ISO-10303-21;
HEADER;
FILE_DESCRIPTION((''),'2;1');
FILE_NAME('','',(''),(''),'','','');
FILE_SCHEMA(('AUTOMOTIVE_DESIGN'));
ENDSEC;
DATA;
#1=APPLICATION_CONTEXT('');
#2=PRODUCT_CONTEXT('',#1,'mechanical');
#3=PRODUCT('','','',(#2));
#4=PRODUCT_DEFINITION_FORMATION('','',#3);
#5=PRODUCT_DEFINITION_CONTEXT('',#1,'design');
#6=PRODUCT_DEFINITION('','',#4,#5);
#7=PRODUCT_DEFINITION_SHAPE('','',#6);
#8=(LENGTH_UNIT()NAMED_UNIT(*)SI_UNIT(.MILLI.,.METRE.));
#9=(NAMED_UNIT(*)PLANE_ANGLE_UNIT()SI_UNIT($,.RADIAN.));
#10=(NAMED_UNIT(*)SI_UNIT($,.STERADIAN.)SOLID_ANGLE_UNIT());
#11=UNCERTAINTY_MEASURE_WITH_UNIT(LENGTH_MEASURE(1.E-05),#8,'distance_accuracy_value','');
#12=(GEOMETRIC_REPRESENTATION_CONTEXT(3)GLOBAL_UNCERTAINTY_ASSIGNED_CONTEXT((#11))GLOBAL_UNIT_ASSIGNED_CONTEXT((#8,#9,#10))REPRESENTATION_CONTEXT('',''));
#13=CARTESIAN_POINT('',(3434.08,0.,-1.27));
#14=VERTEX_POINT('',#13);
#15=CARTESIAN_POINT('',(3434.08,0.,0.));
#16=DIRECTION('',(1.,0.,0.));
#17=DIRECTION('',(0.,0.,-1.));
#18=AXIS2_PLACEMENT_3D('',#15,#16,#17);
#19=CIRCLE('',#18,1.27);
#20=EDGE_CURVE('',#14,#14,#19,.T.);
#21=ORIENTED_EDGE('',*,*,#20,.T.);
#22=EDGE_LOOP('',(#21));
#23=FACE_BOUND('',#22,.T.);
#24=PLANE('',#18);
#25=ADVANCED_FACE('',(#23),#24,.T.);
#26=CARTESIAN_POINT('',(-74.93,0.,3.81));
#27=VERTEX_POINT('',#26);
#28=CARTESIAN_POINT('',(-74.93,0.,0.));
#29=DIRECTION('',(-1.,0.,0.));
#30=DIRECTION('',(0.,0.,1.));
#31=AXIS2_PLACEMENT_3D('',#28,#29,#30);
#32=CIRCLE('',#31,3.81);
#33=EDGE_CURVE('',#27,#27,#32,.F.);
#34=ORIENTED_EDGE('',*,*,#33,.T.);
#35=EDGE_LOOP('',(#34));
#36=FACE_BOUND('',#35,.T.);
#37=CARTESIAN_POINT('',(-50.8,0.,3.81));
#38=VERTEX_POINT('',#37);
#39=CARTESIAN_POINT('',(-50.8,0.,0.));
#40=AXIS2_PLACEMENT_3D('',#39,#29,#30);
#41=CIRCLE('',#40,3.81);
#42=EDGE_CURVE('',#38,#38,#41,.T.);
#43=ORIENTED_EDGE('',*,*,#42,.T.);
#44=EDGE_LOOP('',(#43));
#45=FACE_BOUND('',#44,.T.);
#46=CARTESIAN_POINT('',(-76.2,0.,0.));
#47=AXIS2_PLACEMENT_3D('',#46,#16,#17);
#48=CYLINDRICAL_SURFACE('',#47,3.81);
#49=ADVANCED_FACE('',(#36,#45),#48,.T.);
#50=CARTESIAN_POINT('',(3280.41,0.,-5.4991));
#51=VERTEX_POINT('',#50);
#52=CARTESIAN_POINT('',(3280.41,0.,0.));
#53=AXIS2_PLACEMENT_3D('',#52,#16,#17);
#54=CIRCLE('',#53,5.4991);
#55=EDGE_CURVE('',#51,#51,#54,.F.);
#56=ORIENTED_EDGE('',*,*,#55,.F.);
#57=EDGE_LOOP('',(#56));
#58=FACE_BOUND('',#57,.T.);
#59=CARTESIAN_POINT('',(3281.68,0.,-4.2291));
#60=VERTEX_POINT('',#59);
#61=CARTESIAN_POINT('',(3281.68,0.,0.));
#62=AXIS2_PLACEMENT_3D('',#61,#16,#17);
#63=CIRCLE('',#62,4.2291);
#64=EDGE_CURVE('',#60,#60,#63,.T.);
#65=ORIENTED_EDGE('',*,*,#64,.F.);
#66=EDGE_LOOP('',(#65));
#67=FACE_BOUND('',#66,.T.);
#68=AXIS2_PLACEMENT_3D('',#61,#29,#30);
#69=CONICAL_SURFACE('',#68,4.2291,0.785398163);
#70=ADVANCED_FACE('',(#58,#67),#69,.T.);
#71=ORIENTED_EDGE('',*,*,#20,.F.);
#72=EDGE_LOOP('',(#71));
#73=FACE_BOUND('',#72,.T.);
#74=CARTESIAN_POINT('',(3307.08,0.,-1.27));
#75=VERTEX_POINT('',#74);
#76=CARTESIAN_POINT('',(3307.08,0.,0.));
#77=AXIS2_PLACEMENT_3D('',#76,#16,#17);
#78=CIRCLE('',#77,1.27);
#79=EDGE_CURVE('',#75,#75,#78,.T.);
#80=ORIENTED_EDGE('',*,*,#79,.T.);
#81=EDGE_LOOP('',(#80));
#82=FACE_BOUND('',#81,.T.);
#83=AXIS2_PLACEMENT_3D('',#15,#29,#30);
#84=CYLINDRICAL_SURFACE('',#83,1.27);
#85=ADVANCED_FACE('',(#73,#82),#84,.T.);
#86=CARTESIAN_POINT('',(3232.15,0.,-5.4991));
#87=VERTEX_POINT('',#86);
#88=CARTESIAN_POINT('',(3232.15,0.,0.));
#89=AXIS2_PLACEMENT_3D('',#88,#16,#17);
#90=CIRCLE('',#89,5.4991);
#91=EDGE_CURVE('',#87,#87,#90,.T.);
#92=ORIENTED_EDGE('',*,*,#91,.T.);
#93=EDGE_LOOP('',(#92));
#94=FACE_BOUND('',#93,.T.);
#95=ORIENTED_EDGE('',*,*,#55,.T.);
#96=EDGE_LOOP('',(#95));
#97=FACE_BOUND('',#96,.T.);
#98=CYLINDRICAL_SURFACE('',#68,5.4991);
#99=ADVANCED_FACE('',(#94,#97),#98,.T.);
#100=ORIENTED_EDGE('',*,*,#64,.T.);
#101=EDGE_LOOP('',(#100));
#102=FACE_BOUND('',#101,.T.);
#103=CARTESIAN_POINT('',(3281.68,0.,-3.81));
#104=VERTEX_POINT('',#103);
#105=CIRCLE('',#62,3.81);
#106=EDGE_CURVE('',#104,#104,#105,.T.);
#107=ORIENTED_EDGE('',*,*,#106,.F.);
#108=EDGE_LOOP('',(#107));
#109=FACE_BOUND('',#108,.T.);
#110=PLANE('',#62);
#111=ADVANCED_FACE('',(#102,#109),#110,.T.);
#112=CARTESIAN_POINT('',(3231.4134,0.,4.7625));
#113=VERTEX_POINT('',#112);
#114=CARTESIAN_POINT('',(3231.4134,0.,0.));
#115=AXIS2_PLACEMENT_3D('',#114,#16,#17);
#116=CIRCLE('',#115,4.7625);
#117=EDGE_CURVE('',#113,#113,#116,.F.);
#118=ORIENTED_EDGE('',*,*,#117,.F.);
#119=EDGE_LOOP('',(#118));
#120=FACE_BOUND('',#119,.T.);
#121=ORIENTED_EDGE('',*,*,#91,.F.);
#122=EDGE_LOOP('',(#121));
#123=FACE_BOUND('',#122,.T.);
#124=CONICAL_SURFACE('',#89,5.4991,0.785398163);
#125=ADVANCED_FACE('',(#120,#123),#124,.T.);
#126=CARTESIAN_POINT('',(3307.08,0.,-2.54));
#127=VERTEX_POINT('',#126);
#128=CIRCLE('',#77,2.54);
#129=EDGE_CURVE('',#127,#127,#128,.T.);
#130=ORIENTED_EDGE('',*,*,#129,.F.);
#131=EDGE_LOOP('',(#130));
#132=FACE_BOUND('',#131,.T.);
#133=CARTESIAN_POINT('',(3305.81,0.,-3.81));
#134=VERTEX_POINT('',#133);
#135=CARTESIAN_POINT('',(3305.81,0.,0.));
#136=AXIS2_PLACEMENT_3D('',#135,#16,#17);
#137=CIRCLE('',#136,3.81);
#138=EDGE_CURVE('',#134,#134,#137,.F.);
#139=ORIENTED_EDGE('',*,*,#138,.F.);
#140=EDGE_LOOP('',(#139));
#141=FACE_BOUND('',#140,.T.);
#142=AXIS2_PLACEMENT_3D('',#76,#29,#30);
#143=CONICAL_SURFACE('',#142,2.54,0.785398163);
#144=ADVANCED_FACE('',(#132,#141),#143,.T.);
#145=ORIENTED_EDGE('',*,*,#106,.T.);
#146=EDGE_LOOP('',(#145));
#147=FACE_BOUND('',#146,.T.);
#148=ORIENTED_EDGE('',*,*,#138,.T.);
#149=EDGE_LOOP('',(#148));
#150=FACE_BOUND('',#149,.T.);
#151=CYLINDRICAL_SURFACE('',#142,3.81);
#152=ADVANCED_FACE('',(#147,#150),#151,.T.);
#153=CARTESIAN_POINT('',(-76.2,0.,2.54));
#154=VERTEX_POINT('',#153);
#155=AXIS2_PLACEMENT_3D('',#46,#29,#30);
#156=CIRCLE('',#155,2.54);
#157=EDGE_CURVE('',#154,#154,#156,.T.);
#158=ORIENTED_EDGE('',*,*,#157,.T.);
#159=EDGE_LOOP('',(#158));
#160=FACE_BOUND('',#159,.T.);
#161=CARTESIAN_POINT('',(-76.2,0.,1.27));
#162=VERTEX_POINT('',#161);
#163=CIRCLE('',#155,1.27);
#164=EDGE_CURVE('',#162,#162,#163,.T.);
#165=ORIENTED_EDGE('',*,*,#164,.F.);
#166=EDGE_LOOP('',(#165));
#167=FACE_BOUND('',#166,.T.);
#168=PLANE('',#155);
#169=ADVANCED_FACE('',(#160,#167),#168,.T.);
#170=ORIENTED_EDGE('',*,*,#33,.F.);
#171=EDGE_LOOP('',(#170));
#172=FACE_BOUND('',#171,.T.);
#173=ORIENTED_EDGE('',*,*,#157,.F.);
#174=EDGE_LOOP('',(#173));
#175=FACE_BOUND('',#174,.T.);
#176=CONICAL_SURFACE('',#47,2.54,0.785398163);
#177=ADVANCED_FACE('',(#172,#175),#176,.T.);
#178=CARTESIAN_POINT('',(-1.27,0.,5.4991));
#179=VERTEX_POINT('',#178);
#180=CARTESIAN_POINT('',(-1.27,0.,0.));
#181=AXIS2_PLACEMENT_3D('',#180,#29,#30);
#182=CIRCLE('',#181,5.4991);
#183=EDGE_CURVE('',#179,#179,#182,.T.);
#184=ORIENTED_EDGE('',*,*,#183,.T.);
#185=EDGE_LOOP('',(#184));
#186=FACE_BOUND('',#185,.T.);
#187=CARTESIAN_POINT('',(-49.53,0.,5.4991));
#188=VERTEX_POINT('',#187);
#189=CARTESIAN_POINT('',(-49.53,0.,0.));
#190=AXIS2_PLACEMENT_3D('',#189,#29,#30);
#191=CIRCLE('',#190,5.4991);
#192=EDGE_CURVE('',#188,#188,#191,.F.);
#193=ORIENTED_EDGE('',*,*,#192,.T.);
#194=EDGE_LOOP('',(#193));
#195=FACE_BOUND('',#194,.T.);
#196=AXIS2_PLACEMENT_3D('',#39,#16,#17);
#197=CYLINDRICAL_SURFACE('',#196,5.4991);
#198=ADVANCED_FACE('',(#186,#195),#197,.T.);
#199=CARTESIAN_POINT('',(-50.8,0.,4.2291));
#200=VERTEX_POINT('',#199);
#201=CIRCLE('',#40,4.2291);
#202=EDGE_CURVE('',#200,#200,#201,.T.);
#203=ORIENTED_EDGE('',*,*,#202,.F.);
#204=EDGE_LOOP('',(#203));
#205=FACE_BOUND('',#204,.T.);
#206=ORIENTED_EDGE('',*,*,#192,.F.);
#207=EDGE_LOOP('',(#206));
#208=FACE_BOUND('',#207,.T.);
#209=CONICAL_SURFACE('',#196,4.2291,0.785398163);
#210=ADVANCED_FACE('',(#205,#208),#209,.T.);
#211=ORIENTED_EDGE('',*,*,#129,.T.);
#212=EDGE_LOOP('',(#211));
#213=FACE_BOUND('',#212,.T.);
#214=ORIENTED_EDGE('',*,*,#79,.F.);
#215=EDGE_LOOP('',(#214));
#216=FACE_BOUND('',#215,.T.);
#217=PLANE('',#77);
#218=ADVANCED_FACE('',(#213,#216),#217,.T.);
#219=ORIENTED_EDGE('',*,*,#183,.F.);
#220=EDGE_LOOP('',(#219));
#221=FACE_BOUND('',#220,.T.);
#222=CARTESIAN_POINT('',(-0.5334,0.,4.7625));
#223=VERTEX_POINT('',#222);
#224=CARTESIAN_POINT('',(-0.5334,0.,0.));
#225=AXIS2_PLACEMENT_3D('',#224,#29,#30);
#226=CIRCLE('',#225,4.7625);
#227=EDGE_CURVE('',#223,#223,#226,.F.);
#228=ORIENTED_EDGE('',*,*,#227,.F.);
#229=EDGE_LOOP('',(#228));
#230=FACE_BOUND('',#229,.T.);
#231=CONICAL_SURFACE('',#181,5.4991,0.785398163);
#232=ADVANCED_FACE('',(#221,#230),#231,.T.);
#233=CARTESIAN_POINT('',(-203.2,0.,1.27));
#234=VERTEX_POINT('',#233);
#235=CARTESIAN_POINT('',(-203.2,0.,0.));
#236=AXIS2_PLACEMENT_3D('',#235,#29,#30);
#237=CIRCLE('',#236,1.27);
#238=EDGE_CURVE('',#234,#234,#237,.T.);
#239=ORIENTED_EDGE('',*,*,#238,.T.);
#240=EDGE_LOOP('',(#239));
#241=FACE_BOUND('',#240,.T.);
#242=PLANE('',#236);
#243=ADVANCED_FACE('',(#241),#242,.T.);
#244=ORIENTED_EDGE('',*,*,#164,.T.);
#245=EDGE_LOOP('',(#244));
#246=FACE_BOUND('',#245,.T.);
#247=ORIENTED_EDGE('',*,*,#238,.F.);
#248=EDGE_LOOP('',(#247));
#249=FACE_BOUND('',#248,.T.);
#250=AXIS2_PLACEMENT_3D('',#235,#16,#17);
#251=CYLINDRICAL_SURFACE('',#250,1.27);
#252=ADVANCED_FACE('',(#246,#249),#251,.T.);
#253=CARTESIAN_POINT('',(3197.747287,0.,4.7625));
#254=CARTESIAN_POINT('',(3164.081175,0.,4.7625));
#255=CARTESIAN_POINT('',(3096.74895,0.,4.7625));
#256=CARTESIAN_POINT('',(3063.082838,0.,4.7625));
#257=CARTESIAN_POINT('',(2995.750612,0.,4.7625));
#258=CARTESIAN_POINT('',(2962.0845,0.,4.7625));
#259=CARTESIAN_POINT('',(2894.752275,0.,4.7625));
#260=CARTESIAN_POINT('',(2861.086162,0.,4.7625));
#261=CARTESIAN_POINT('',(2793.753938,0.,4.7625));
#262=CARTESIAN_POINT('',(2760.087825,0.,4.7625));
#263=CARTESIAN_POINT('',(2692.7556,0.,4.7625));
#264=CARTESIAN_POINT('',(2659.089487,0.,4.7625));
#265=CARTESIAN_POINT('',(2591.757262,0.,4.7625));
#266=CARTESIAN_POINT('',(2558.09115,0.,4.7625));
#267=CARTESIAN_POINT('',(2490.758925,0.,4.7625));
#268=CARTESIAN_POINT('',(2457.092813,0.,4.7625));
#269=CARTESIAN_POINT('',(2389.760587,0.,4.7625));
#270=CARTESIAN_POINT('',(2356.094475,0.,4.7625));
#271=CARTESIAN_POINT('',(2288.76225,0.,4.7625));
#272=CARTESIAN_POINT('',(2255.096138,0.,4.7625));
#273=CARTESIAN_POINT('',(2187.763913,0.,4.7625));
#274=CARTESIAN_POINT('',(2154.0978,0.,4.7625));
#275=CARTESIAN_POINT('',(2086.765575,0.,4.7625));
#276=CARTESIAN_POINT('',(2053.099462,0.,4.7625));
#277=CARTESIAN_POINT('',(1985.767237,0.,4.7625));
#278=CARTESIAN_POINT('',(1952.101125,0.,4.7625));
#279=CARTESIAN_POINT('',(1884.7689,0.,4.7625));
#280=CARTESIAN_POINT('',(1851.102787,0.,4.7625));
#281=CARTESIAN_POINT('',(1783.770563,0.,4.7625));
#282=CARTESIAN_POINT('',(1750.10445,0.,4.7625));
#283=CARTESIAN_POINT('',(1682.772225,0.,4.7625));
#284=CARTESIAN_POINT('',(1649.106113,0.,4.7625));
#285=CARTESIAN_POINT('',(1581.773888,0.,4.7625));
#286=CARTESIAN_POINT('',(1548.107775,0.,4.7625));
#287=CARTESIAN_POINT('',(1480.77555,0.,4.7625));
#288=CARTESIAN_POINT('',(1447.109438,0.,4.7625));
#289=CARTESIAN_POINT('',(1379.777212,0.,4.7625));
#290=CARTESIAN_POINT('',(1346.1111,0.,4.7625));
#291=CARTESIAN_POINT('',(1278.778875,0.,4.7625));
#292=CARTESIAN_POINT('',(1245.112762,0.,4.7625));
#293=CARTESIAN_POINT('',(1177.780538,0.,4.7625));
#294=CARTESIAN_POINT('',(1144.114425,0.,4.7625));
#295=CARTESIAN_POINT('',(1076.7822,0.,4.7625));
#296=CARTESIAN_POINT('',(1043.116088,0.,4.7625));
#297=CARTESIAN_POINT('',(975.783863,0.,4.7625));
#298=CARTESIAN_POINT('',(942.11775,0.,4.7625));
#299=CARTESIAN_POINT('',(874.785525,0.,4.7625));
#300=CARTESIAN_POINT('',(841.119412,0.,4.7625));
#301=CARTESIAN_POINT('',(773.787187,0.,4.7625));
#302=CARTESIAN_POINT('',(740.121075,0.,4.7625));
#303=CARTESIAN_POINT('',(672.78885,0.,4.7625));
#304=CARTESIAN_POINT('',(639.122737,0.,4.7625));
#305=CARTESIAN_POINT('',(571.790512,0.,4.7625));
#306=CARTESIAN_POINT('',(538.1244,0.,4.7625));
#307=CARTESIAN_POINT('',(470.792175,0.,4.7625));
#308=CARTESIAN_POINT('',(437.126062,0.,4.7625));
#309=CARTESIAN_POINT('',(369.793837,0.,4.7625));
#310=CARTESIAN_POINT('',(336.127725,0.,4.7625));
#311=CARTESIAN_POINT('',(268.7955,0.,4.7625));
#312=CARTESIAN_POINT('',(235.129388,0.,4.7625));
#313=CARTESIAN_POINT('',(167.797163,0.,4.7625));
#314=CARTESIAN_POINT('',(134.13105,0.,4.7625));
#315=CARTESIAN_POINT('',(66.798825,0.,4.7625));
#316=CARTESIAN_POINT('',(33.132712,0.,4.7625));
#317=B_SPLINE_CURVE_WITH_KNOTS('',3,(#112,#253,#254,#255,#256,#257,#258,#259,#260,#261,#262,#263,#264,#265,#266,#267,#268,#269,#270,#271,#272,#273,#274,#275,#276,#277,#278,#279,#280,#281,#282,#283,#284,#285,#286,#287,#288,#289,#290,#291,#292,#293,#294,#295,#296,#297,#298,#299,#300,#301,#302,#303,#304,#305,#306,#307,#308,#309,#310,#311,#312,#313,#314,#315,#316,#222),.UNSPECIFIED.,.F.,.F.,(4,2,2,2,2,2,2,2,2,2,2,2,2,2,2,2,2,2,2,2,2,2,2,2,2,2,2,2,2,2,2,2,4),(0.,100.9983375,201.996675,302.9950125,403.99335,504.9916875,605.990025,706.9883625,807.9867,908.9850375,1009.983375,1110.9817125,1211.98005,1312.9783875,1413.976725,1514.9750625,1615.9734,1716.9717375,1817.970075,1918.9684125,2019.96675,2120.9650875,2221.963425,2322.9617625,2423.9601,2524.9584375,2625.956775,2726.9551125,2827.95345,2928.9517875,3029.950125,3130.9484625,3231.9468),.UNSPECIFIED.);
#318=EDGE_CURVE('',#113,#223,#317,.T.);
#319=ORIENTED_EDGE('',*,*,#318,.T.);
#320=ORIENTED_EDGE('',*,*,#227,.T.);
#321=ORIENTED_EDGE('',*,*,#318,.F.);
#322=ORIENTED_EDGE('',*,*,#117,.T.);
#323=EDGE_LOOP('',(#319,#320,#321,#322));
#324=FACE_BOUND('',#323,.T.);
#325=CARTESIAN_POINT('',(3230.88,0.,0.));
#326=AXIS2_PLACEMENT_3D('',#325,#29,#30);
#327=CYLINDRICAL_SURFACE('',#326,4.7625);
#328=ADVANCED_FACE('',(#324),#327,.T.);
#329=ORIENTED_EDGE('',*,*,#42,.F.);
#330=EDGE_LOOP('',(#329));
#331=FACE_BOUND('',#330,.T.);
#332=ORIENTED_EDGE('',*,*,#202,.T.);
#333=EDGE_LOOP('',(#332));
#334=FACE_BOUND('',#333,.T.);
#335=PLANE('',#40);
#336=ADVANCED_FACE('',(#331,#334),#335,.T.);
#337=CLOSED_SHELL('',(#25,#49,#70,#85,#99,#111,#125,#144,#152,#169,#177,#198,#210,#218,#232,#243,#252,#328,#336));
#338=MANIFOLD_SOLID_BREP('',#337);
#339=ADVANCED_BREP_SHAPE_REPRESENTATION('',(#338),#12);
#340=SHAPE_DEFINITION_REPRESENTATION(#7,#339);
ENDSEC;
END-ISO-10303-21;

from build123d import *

# Parameters (mm, degrees)
SKETCH3_R           = 4.7625
BOSS_EXTRUDE1_DEPTH = 3230.88
SKETCH4_R           = 5.4991
BOSS_EXTRUDE2_DEPTH = 50.8
BOSS_EXTRUDE3_START = 50.8
SKETCH5_R           = 5.4991
BOSS_EXTRUDE3_DEPTH = 50.8
SKETCH6_R           = 3.81
BOSS_EXTRUDE4_DEPTH = 25.4
BOSS_EXTRUDE5_START = 25.4
SKETCH7_R           = 3.81
BOSS_EXTRUDE5_DEPTH = 25.4
CHAMFER1_SIZE       = 1.27
SKETCH8_R           = 1.27
BOSS_EXTRUDE6_DEPTH = 127
BOSS_EXTRUDE7_START = 127
SKETCH9_R           = 1.27
BOSS_EXTRUDE7_DEPTH = 127


with BuildPart() as part:
    # Sketch3 → Boss-Extrude1 (new body)
    with BuildSketch(Plane(origin=(0, 0, 0), x_dir=(0, 0, -1), z_dir=(1, 0, 0))):
        with Locations(Location((0, 0, 0), (0, 0, 180))):
            Circle(SKETCH3_R)
    extrude(amount=BOSS_EXTRUDE1_DEPTH)

    # Sketch4 → Boss-Extrude2 (add)
    with BuildSketch(Plane(origin=(3230.88, 0, 0), x_dir=(0, 0, -1), z_dir=(1, 0, 0))):
        Circle(SKETCH4_R)
    extrude(amount=BOSS_EXTRUDE2_DEPTH)

    # Sketch5 → Boss-Extrude3 (add)
    with BuildSketch(Plane.ZY.offset(BOSS_EXTRUDE3_START)):
        with Locations(Location((0, 0, 0), (0, 0, 180))):
            Circle(SKETCH5_R)
    extrude(amount=-BOSS_EXTRUDE3_DEPTH)

    # Sketch6 → Boss-Extrude4 (add)
    with BuildSketch(Plane.ZY.offset(50.8)):
        Circle(SKETCH6_R)
    extrude(amount=BOSS_EXTRUDE4_DEPTH)

    # Sketch7 → Boss-Extrude5 (add)
    with BuildSketch(Plane(origin=(3281.68, 0, 0), x_dir=(0, 0, -1), z_dir=(1, 0, 0)).offset(BOSS_EXTRUDE5_START)):
        with Locations(Location((0, 0, 0), (0, 0, 180))):
            Circle(SKETCH7_R)
    extrude(amount=-BOSS_EXTRUDE5_DEPTH)

    # Chamfer1
    # the kernel refuses this chamfer: 1.27 mm, written as the material it takes off along each edge
    with BuildSketch(Plane(origin=(-76.2, 0, 0), x_dir=(0, 0, 1), z_dir=(0, -1, 0))) as chamfer1_piece_1:
        Polygon((3.81, -CHAMFER1_SIZE), (3.81 - CHAMFER1_SIZE, 0), (3.81, 0), align=None)
    revolve(axis=Axis((-76.2, 0, 0), (-1, 0, 0)), mode=Mode.SUBTRACT)
    with BuildSketch(Plane(origin=(0, 0, 0), x_dir=(0, 0, -1), z_dir=(0, 1, 0))) as chamfer1_piece_2_section:
        Polygon((5.4991, CHAMFER1_SIZE), (5.4991 - CHAMFER1_SIZE, 0), (5.4991, 0), align=None)
    chamfer1_piece_2 = revolve(axis=Axis((0, 0, 0), (-1, 0, 0)), mode=Mode.PRIVATE)
    chamfer1_piece_2 = chamfer1_piece_2 - Plane(origin=(-0.899385483, 0, 0), x_dir=(0, 0, 1), z_dir=(-1, 0, 0)) * Cylinder(4.7625, 22, mode=Mode.PRIVATE)
    add(chamfer1_piece_2, mode=Mode.SUBTRACT)
    with BuildSketch(Plane(origin=(-50.8, 0, 0), x_dir=(0, 0, -1), z_dir=(0, 1, 0))) as chamfer1_piece_3:
        Polygon((5.4991, -CHAMFER1_SIZE), (5.4991 - CHAMFER1_SIZE, 0), (5.4991, 0), align=None)
    revolve(axis=Axis((-50.8, 0, 0), (-1, 0, 0)), mode=Mode.SUBTRACT)
    with BuildSketch(Plane(origin=(3307.08, 0, 0), x_dir=(0, 0, 1), z_dir=(0, 1, 0))) as chamfer1_piece_4:
        Polygon((3.81, -CHAMFER1_SIZE), (3.81 - CHAMFER1_SIZE, 0), (3.81, 0), align=None)
    revolve(axis=Axis((3307.08, 0, 0), (1, 0, 0)), mode=Mode.SUBTRACT)
    with BuildSketch(Plane(origin=(3281.68, 0, 0), x_dir=(0, 0, -1), z_dir=(0, -1, 0))) as chamfer1_piece_5:
        Polygon((5.4991, -CHAMFER1_SIZE), (5.4991 - CHAMFER1_SIZE, 0), (5.4991, 0), align=None)
    revolve(axis=Axis((3281.68, 0, 0), (1, 0, 0)), mode=Mode.SUBTRACT)
    with BuildSketch(Plane(origin=(3230.88, 0, 0), x_dir=(0, 0, -1), z_dir=(0, -1, 0))) as chamfer1_piece_6_section:
        Polygon((5.4991 - CHAMFER1_SIZE, 0), (5.4991, CHAMFER1_SIZE), (5.4991, 0), align=None)
    chamfer1_piece_6 = revolve(axis=Axis((3230.88, 0, 0), (1, 0, 0)), mode=Mode.PRIVATE)
    chamfer1_piece_6 = chamfer1_piece_6 - Plane(origin=(3231.779385483, 0, 0), x_dir=(0, 0, 1), z_dir=(-1, 0, 0)) * Cylinder(4.7625, 22, mode=Mode.PRIVATE)
    add(chamfer1_piece_6, mode=Mode.SUBTRACT)

    # Sketch8 → Boss-Extrude6 (add)
    with BuildSketch(Plane.ZY.offset(76.2)):
        Circle(SKETCH8_R)
    extrude(amount=BOSS_EXTRUDE6_DEPTH)

    # Sketch9 → Boss-Extrude7 (add)
    with BuildSketch(Plane(origin=(3307.08, 0, 0), x_dir=(0, 0, -1), z_dir=(1, 0, 0)).offset(BOSS_EXTRUDE7_START)):
        with Locations(Location((0, 0, 0), (0, 0, 180))):
            Circle(SKETCH9_R)
    extrude(amount=-BOSS_EXTRUDE7_DEPTH)


solid = part.part
